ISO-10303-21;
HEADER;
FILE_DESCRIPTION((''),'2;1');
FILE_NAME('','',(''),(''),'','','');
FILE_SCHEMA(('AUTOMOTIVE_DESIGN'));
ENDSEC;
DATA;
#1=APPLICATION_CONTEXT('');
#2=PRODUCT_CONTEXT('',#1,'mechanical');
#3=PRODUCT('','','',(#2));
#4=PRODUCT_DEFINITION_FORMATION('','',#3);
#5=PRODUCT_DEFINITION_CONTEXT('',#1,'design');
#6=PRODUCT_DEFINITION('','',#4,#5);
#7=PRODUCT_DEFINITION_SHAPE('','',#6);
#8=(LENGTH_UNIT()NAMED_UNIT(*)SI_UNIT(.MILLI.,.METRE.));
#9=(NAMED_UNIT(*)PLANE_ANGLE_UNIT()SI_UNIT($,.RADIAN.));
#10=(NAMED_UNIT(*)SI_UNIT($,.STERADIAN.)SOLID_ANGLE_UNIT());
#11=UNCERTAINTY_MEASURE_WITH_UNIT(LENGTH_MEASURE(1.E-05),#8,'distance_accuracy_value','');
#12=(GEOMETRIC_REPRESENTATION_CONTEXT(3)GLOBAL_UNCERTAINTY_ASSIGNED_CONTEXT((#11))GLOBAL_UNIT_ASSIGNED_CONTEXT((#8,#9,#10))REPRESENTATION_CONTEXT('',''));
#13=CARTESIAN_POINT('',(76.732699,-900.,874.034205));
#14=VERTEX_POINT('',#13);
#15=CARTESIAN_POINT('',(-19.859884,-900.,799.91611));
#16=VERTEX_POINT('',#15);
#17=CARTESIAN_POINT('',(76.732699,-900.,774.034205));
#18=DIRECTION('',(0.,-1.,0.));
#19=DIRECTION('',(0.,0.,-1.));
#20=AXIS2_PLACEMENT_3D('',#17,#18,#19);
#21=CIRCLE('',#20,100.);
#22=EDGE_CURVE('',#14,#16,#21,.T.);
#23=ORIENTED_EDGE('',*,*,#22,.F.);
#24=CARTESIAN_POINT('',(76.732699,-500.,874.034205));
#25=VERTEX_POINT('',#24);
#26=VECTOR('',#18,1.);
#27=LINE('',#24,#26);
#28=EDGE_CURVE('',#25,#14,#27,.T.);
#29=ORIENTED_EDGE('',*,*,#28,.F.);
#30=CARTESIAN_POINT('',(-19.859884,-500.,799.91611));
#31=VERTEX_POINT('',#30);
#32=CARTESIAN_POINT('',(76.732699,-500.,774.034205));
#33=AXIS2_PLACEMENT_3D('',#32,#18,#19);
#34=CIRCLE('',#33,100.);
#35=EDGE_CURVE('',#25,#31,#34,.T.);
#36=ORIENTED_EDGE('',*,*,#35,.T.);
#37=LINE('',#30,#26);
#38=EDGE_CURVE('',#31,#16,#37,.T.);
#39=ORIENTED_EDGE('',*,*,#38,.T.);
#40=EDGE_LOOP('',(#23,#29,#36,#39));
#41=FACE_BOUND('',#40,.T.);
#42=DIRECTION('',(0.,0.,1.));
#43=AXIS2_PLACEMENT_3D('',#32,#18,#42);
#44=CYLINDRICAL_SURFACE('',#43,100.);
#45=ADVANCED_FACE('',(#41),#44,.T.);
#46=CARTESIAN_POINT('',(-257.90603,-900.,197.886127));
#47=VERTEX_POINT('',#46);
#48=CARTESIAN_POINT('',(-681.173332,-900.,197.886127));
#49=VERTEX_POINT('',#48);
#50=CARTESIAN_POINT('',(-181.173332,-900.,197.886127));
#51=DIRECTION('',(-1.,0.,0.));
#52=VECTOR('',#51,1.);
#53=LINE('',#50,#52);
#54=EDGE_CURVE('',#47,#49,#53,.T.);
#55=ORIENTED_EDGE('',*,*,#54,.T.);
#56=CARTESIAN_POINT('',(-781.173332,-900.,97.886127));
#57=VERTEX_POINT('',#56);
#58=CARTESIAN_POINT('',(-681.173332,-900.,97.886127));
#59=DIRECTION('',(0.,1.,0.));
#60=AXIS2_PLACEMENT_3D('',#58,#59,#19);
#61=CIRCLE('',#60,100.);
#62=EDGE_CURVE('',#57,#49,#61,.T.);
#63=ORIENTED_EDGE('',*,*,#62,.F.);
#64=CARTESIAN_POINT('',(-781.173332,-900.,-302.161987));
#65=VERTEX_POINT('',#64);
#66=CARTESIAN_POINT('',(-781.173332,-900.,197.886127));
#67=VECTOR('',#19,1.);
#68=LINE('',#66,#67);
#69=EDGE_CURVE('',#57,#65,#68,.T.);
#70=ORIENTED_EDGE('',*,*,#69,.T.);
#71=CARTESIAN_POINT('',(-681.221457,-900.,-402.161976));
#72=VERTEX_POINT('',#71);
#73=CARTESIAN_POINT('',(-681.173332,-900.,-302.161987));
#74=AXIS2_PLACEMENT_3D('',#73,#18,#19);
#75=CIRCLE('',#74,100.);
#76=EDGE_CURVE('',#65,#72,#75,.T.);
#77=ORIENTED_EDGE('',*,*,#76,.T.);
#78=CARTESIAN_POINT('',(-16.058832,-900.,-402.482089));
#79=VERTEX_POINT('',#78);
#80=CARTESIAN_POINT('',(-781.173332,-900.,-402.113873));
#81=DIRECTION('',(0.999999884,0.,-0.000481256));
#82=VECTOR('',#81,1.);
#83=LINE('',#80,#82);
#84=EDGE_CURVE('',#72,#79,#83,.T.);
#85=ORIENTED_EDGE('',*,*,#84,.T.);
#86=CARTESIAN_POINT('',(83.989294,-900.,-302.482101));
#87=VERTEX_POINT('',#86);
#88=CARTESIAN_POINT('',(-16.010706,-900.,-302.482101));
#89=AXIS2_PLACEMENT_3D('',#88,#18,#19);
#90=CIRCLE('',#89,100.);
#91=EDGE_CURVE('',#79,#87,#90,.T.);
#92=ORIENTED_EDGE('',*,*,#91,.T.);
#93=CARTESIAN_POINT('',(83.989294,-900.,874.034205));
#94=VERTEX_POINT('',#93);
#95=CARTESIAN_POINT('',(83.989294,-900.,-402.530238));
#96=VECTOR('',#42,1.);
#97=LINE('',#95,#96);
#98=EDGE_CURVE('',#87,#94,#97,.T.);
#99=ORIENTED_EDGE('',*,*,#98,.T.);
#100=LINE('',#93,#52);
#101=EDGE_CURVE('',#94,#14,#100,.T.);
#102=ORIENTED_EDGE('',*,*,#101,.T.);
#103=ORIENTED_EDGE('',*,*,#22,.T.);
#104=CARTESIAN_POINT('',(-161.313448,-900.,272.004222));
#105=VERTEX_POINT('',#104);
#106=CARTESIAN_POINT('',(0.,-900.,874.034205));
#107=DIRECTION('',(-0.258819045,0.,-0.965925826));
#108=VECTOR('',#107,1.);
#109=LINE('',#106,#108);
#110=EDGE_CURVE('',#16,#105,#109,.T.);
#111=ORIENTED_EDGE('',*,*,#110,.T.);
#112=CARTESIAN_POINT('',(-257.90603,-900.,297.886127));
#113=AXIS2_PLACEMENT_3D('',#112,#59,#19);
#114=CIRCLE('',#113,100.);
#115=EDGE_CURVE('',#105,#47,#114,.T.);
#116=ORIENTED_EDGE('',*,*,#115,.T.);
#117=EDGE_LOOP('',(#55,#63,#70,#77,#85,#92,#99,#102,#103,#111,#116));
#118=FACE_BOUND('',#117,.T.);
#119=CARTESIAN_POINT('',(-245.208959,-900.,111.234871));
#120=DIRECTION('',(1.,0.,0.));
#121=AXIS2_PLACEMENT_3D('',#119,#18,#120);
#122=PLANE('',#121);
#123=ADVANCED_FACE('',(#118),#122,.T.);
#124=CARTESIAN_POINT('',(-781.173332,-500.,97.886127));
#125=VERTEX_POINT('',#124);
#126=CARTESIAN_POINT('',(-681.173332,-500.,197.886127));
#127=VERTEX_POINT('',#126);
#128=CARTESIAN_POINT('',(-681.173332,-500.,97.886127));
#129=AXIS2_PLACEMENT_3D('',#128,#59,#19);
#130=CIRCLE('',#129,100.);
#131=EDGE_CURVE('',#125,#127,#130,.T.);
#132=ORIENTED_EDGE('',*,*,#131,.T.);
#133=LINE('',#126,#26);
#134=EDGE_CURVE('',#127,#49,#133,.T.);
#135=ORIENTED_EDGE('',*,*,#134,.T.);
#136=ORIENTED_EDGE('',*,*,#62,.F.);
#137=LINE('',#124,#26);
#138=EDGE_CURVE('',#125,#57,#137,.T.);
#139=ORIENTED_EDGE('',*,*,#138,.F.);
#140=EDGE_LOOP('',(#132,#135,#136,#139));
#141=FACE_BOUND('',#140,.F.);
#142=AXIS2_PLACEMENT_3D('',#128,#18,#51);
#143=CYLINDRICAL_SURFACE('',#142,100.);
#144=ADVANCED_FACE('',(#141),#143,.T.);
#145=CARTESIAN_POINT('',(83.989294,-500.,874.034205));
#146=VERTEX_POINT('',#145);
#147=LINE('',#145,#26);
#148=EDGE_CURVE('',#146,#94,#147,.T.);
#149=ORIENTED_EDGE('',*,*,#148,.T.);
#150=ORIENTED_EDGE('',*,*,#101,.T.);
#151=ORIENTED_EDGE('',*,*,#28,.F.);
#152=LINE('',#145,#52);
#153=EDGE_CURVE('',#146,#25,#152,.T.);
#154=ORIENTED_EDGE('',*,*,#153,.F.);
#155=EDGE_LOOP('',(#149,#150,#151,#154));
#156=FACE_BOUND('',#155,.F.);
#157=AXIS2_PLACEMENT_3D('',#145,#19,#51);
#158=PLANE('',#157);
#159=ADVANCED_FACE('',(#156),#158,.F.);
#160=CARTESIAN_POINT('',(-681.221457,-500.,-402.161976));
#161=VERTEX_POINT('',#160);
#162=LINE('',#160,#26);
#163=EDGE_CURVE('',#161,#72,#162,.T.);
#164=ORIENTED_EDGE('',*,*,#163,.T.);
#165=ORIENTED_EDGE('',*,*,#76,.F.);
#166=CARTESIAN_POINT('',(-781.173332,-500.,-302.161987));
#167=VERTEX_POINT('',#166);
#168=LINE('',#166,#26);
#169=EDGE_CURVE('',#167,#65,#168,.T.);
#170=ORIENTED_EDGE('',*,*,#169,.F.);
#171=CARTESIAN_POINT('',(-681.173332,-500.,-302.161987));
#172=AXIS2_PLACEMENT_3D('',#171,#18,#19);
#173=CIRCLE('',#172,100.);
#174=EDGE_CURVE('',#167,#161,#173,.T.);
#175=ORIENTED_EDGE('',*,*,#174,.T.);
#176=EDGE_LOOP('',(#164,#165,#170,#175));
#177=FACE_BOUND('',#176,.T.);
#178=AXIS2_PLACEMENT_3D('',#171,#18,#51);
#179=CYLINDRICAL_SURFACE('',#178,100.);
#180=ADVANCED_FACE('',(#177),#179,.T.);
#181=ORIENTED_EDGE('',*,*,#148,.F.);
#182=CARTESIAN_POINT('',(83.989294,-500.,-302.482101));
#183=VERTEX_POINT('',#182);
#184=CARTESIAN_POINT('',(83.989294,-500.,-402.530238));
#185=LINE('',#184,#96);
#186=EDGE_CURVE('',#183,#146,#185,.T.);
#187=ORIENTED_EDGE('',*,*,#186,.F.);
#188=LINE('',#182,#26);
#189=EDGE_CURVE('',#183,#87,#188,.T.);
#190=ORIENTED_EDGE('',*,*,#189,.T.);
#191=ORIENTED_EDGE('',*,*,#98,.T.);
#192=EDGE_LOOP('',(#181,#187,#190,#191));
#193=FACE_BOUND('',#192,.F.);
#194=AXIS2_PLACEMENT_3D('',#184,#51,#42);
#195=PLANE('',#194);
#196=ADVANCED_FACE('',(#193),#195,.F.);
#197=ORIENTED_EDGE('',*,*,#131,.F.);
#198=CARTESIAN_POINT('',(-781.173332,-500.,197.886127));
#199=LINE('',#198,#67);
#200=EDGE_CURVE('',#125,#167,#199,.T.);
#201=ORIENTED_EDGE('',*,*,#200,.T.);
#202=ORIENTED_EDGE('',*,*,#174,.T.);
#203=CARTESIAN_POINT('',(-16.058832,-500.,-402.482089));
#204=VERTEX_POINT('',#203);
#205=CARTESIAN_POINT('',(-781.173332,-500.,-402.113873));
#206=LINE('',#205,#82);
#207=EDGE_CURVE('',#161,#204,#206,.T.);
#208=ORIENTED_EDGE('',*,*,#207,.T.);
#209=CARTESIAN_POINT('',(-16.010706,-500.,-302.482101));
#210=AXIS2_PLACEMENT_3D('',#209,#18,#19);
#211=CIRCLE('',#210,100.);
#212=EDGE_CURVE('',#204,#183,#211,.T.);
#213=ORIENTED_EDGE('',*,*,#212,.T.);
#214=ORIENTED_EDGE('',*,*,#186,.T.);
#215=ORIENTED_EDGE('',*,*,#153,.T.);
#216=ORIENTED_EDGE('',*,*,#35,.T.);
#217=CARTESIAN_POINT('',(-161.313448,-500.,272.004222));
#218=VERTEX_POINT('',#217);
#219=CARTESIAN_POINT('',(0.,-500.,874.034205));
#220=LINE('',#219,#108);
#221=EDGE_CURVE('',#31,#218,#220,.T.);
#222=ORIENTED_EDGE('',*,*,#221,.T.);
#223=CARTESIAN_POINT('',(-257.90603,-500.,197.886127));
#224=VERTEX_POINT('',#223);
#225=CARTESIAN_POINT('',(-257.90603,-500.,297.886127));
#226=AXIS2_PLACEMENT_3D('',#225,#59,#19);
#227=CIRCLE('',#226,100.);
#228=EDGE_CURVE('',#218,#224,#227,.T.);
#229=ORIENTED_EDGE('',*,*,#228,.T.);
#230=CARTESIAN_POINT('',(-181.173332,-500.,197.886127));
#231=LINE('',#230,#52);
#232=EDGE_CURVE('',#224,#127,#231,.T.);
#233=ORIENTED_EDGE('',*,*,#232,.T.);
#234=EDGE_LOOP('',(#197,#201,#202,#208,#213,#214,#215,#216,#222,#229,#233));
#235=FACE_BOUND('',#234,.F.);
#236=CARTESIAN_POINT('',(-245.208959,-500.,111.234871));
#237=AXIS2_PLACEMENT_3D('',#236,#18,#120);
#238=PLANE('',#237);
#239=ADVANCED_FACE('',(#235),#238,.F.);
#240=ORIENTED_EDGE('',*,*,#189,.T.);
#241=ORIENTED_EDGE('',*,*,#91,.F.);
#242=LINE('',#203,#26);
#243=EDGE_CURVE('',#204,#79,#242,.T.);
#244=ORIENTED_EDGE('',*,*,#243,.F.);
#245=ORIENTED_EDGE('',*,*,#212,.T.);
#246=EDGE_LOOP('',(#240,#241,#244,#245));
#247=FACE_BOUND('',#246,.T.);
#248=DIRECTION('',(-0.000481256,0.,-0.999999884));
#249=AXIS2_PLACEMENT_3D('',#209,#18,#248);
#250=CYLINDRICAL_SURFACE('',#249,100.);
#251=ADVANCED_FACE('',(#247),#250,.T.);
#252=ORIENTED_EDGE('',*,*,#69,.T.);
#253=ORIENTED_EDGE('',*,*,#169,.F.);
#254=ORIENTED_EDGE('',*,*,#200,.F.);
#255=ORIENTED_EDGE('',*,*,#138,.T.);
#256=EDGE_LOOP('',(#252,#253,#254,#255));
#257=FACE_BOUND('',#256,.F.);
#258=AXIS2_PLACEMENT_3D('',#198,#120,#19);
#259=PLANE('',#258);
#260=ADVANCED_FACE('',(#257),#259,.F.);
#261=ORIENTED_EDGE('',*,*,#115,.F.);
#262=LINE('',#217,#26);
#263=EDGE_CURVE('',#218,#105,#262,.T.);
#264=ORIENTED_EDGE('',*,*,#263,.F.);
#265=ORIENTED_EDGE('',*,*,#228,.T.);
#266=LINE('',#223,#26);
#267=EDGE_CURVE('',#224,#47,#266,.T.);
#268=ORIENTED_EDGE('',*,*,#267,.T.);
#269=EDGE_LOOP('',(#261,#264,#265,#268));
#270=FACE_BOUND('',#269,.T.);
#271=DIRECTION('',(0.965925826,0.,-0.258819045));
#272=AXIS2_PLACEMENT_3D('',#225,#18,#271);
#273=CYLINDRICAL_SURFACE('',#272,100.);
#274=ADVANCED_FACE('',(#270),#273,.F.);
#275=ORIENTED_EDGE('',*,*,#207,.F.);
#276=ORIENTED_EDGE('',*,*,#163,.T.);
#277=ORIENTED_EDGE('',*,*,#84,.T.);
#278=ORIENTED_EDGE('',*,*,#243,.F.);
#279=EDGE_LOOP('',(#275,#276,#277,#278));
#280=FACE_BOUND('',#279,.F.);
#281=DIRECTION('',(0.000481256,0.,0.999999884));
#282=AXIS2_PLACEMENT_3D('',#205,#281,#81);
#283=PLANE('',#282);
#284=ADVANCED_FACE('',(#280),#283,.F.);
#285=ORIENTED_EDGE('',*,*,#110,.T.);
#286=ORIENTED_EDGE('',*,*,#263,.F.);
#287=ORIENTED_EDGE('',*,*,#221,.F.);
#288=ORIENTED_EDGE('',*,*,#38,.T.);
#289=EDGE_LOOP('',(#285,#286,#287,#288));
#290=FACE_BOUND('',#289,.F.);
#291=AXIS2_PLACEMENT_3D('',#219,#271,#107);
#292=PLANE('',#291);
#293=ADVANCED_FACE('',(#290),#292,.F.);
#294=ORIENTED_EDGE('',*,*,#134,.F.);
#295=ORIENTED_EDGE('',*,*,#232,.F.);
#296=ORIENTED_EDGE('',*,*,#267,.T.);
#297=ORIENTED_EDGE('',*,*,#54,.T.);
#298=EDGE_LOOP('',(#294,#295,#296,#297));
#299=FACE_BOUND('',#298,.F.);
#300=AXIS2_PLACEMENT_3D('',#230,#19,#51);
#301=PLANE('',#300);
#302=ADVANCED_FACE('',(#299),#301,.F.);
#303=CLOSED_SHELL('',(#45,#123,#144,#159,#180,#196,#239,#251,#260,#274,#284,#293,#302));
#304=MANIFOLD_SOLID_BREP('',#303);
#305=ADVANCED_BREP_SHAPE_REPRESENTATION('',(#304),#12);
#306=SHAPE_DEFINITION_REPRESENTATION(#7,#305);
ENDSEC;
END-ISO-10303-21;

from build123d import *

# Parameters (mm, degrees)
F2_DEPTH = 400
F3_R     = 100


# Not quite as in the source:
# - a feature of the source that left no trace in its solid (it failed there, or was rolled back) is left out
# - the program builds the solid bodies; features that only make, move or delete a surface that nothing else refers to are left out


with BuildPart() as f2:
    # F1 (on offset) → F2 (new body)
    with BuildSketch(Plane.XZ.offset(500)):
        Polygon((-781.1733315718, 197.8861267962), (-781.1733315718, -402.1138732038), (83.9892935576, -402.5302380195), (83.9892935576, 874.0342051986), (0, 874.0342051986), (-181.1733315718, 197.8861267962), align=None)
    extrude(amount=F2_DEPTH)

    # F3
    f3_edges = [f2.edges().sort_by_distance(p)[0] for p in [
        (-781.173332, -700, 197.886127),
        (0, -700, 874.034205),
        (-181.173332, -700, 197.886127),
        (-781.173332, -700, -402.113873),
        (83.989294, -700, -402.530238),
    ]]
    fillet(f3_edges, radius=F3_R)


solid = f2.part
